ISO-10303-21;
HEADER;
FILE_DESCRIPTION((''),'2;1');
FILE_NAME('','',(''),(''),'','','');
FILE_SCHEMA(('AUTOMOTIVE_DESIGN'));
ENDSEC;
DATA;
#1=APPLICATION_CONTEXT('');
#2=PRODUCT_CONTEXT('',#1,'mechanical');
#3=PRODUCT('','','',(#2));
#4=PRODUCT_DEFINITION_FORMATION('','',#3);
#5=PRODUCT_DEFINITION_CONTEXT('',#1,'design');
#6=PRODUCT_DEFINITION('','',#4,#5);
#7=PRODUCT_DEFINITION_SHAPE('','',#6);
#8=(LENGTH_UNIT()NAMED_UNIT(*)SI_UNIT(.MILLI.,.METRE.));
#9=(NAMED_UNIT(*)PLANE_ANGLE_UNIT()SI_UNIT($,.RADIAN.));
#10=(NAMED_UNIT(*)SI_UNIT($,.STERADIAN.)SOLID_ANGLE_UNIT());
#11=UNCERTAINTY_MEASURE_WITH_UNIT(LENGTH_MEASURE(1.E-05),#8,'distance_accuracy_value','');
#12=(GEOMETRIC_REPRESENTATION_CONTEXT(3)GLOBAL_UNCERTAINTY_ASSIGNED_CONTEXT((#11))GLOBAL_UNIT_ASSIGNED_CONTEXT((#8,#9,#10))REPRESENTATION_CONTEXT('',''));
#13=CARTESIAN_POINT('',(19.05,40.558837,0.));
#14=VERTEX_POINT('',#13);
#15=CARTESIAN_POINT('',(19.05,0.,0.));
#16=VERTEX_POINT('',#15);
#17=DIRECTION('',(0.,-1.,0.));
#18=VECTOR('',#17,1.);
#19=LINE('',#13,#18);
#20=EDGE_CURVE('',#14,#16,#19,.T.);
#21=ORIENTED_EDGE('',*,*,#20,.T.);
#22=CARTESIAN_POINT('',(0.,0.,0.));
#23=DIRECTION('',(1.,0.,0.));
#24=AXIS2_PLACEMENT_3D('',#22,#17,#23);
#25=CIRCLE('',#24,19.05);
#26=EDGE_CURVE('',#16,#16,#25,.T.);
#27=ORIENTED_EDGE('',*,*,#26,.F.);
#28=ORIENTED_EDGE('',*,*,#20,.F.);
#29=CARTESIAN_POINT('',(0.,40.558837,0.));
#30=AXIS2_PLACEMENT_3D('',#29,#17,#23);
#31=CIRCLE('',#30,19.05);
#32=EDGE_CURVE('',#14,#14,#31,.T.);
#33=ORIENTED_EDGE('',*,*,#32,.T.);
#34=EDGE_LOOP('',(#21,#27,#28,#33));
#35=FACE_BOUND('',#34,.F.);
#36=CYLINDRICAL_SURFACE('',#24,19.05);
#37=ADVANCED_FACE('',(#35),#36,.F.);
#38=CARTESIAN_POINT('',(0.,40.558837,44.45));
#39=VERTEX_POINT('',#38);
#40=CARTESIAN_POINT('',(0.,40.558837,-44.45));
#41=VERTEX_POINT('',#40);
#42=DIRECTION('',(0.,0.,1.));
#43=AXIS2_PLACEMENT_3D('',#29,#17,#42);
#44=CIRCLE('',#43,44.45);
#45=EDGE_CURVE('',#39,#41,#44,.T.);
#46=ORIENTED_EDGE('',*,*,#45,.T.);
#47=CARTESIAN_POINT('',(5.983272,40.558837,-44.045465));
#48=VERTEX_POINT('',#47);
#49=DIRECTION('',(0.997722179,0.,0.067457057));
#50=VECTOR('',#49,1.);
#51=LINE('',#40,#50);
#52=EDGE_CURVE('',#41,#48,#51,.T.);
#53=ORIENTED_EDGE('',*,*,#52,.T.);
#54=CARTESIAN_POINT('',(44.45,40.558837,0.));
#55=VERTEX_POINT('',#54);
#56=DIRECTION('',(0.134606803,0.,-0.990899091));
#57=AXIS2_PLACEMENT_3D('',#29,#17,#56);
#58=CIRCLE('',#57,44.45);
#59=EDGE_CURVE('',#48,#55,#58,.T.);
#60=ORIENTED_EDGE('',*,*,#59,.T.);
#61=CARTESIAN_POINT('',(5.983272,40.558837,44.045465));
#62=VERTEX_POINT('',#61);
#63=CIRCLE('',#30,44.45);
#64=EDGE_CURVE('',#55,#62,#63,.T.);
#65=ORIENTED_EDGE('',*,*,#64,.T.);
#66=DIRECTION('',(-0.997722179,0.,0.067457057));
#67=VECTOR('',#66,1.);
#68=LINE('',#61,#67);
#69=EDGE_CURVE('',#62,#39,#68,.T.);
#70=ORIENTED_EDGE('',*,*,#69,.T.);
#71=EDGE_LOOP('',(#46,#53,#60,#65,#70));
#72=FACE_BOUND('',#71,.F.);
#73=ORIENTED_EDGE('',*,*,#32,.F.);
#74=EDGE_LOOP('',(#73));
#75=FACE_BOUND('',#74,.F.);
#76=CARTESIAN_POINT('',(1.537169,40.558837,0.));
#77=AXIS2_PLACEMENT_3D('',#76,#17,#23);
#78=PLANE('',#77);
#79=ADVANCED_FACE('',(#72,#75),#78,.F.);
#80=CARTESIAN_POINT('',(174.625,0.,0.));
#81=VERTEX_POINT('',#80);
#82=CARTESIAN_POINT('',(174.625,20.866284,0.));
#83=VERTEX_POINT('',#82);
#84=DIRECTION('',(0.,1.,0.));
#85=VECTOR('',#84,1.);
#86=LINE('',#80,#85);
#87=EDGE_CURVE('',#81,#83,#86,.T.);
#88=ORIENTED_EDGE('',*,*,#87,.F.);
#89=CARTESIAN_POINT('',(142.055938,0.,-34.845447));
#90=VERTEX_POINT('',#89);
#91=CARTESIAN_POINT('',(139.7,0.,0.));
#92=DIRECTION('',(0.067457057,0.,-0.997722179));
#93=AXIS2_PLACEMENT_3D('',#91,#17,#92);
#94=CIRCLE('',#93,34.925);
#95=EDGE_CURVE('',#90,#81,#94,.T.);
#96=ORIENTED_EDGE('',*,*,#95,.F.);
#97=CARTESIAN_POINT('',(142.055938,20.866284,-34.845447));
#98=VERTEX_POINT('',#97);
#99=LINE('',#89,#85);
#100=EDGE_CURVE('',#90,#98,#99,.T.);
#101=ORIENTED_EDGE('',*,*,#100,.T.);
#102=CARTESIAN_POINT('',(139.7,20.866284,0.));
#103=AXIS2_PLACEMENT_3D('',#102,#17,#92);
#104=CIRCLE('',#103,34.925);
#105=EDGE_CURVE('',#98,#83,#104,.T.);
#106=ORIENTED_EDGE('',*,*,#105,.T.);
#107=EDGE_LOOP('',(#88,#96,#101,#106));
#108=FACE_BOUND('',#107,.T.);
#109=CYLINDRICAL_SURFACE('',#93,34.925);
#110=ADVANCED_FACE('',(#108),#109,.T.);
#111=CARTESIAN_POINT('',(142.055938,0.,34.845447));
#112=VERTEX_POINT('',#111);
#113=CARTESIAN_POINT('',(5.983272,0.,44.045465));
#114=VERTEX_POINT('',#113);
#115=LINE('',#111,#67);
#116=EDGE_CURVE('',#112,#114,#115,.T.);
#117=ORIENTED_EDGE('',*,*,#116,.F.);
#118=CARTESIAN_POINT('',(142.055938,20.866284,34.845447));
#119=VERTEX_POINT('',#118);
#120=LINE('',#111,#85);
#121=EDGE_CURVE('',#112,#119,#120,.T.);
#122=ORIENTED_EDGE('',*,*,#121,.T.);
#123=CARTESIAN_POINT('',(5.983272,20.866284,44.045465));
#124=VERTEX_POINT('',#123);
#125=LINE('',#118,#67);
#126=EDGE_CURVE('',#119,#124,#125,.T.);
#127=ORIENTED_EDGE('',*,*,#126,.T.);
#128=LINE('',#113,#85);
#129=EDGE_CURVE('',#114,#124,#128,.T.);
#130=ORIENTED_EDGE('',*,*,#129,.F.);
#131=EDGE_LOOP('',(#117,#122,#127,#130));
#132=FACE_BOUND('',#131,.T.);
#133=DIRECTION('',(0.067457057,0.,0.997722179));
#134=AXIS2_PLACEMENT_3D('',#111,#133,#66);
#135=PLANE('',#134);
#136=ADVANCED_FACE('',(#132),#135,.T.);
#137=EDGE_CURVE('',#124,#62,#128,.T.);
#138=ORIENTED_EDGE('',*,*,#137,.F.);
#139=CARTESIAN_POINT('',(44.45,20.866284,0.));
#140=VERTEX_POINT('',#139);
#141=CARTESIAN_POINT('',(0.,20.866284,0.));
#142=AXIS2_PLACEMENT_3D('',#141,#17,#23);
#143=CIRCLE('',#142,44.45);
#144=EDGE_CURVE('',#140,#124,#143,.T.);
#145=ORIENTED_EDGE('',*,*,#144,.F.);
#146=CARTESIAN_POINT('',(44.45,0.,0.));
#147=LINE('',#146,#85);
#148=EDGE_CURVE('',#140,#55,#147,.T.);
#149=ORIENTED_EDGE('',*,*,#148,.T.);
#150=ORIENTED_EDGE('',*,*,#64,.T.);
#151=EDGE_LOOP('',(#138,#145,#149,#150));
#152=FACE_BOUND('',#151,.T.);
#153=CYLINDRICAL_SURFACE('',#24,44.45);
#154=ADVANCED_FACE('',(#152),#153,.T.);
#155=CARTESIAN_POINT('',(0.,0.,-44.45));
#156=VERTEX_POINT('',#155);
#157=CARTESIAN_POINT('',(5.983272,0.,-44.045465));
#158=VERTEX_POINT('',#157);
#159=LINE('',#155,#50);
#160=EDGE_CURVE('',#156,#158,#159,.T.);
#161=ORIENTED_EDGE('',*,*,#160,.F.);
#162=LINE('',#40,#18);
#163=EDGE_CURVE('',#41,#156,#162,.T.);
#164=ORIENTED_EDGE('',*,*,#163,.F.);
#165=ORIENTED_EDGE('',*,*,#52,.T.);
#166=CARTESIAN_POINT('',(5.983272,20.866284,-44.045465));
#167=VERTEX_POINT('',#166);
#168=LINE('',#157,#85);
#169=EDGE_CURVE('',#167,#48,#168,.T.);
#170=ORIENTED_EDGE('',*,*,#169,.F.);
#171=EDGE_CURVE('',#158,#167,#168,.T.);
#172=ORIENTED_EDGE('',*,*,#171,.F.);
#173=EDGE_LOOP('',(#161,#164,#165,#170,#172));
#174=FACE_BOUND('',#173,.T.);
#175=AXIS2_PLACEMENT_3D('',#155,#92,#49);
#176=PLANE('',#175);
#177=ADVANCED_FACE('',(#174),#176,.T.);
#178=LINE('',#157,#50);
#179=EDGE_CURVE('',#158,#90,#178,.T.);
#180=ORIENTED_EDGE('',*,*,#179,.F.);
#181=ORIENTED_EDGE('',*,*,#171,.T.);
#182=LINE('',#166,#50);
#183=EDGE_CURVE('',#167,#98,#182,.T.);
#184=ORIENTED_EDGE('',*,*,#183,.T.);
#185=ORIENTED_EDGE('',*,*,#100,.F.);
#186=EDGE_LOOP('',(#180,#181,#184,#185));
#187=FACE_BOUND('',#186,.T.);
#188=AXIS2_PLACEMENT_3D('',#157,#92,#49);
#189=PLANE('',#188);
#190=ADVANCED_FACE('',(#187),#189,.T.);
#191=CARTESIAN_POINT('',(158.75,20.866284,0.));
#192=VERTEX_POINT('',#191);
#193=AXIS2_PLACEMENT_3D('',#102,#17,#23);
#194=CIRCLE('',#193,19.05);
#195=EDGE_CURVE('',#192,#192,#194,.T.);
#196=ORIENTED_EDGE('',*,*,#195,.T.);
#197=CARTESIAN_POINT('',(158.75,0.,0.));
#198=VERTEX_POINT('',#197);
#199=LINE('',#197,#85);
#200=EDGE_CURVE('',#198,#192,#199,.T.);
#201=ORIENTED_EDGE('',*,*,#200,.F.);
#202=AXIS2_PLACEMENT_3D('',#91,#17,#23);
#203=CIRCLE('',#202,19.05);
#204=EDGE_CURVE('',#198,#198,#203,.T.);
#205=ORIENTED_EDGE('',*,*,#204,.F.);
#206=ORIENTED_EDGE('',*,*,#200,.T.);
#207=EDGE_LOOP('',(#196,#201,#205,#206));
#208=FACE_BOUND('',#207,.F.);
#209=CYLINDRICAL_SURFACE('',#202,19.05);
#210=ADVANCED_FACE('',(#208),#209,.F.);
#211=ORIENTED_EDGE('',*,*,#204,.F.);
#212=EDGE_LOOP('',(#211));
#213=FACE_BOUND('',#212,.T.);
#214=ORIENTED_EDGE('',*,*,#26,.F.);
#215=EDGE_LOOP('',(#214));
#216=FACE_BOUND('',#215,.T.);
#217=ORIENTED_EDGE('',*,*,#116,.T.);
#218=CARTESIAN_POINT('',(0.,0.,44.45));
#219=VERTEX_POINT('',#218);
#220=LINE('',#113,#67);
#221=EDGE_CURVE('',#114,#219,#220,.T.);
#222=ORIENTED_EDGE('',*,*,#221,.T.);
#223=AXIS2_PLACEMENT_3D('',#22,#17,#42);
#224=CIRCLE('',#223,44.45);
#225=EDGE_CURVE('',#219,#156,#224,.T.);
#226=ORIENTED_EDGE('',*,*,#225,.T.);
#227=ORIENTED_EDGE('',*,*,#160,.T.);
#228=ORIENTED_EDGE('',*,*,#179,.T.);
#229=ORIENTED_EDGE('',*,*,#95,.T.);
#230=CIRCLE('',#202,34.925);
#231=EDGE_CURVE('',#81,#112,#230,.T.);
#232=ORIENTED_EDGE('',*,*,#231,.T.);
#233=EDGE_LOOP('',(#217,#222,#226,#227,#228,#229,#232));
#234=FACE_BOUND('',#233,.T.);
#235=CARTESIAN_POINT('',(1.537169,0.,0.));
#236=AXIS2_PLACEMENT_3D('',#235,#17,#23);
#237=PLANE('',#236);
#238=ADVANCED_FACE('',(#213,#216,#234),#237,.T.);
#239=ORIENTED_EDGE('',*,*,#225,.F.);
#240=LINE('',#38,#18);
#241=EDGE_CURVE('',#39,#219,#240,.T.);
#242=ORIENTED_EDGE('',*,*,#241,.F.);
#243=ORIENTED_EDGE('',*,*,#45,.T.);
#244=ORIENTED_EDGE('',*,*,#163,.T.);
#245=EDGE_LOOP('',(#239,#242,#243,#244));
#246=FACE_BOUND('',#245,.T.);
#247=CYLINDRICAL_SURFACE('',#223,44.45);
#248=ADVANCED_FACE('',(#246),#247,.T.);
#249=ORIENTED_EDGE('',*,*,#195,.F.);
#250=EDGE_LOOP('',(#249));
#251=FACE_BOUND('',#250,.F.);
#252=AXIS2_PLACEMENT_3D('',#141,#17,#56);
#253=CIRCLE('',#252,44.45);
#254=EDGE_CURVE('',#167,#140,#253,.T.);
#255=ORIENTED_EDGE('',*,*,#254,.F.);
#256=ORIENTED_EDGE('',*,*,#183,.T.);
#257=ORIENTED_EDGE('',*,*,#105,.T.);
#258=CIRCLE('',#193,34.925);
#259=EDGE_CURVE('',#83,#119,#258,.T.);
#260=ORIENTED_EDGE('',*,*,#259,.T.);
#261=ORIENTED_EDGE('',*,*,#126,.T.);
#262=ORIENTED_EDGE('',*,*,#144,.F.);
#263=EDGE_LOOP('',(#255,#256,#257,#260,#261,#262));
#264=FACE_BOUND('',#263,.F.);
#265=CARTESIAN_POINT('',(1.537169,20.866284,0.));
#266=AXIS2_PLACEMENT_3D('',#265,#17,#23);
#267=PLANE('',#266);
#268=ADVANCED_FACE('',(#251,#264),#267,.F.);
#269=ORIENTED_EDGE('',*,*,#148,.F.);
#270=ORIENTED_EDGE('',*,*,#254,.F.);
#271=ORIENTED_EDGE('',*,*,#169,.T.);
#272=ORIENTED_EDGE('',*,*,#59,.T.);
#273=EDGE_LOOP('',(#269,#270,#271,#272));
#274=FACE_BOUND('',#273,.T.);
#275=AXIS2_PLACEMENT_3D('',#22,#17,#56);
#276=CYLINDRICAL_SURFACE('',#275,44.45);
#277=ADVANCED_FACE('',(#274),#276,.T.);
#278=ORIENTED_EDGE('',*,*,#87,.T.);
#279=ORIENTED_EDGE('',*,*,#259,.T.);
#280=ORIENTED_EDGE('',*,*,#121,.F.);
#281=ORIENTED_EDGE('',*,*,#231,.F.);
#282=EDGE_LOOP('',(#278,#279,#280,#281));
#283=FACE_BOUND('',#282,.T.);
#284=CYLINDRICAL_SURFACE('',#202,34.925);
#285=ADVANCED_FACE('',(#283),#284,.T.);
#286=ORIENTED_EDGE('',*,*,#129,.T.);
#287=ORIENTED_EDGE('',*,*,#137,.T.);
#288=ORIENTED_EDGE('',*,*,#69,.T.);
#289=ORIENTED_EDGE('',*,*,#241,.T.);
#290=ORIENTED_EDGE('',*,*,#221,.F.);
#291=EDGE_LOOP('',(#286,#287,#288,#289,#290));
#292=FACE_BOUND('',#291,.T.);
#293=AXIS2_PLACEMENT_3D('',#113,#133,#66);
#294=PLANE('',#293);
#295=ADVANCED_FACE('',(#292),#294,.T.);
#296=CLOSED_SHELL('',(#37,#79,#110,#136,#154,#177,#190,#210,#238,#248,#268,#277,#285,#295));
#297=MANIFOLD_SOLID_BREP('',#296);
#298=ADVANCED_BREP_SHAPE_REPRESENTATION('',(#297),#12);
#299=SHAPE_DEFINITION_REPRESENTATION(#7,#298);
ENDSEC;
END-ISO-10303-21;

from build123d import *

# Parameters (mm, degrees)
F0_R     = 19.05
F1_DEPTH = 20.8662841469
F2_DEPTH = 40.5588373542


# Not quite as in the source:
# - the program builds the solid bodies; features that only make, move or delete a surface that nothing else refers to are left out


with BuildPart() as f1:
    # F0 (on Front) → F1 (new body)
    with BuildSketch(Plane.XZ):
        with BuildLine():
            Line((5.983272408, 44.0454645939), (0, 44.45))
            ThreePointArc((0, 44.45), (-44.45, 0), (0, -44.45))
            Line((0, -44.45), (5.983272408, -44.0454645939))
            ThreePointArc((5.983272408, -44.0454645939), (33.4795382177, -29.2390666871), (44.45, 0))
            ThreePointArc((44.45, 0), (33.4795382177, 29.2390666871), (5.983272408, 44.0454645939))
        make_face()
        Circle(F0_R, mode=Mode.SUBTRACT)
        with BuildLine():
            Line((142.0559377087, 34.8454470844), (5.983272408, 44.0454645939))
            ThreePointArc((5.983272408, 44.0454645939), (33.4795382177, 29.2390666871), (44.45, 0))
            ThreePointArc((44.45, 0), (33.4795382177, -29.2390666871), (5.983272408, -44.0454645939))
            Line((5.983272408, -44.0454645939), (142.0559377087, -34.8454470844))
            ThreePointArc((142.0559377087, -34.8454470844), (104.775, 0), (142.0559377087, 34.8454470844))
        make_face()
        with BuildLine():
            ThreePointArc((174.625, 0), (165.2150617232, 23.8482127268), (142.0559377087, 34.8454470844))
            ThreePointArc((142.0559377087, 34.8454470844), (104.775, 0), (142.0559377087, -34.8454470844))
            ThreePointArc((142.0559377087, -34.8454470844), (165.2150617232, -23.8482127268), (174.625, 0))
        make_face()
        with Locations((139.7, 0)):
            Circle(F0_R, mode=Mode.SUBTRACT)
    extrude(amount=-F1_DEPTH)

    # F0 (on Front) → F2 (join)
    with BuildSketch(Plane.XZ):
        with BuildLine():
            Line((5.983272408, 44.0454645939), (0, 44.45))
            ThreePointArc((0, 44.45), (-44.45, 0), (0, -44.45))
            Line((0, -44.45), (5.983272408, -44.0454645939))
            ThreePointArc((5.983272408, -44.0454645939), (33.4795382177, -29.2390666871), (44.45, 0))
            ThreePointArc((44.45, 0), (33.4795382177, 29.2390666871), (5.983272408, 44.0454645939))
        make_face()
        Circle(F0_R, mode=Mode.SUBTRACT)
    extrude(amount=-F2_DEPTH)


solid = f1.part
